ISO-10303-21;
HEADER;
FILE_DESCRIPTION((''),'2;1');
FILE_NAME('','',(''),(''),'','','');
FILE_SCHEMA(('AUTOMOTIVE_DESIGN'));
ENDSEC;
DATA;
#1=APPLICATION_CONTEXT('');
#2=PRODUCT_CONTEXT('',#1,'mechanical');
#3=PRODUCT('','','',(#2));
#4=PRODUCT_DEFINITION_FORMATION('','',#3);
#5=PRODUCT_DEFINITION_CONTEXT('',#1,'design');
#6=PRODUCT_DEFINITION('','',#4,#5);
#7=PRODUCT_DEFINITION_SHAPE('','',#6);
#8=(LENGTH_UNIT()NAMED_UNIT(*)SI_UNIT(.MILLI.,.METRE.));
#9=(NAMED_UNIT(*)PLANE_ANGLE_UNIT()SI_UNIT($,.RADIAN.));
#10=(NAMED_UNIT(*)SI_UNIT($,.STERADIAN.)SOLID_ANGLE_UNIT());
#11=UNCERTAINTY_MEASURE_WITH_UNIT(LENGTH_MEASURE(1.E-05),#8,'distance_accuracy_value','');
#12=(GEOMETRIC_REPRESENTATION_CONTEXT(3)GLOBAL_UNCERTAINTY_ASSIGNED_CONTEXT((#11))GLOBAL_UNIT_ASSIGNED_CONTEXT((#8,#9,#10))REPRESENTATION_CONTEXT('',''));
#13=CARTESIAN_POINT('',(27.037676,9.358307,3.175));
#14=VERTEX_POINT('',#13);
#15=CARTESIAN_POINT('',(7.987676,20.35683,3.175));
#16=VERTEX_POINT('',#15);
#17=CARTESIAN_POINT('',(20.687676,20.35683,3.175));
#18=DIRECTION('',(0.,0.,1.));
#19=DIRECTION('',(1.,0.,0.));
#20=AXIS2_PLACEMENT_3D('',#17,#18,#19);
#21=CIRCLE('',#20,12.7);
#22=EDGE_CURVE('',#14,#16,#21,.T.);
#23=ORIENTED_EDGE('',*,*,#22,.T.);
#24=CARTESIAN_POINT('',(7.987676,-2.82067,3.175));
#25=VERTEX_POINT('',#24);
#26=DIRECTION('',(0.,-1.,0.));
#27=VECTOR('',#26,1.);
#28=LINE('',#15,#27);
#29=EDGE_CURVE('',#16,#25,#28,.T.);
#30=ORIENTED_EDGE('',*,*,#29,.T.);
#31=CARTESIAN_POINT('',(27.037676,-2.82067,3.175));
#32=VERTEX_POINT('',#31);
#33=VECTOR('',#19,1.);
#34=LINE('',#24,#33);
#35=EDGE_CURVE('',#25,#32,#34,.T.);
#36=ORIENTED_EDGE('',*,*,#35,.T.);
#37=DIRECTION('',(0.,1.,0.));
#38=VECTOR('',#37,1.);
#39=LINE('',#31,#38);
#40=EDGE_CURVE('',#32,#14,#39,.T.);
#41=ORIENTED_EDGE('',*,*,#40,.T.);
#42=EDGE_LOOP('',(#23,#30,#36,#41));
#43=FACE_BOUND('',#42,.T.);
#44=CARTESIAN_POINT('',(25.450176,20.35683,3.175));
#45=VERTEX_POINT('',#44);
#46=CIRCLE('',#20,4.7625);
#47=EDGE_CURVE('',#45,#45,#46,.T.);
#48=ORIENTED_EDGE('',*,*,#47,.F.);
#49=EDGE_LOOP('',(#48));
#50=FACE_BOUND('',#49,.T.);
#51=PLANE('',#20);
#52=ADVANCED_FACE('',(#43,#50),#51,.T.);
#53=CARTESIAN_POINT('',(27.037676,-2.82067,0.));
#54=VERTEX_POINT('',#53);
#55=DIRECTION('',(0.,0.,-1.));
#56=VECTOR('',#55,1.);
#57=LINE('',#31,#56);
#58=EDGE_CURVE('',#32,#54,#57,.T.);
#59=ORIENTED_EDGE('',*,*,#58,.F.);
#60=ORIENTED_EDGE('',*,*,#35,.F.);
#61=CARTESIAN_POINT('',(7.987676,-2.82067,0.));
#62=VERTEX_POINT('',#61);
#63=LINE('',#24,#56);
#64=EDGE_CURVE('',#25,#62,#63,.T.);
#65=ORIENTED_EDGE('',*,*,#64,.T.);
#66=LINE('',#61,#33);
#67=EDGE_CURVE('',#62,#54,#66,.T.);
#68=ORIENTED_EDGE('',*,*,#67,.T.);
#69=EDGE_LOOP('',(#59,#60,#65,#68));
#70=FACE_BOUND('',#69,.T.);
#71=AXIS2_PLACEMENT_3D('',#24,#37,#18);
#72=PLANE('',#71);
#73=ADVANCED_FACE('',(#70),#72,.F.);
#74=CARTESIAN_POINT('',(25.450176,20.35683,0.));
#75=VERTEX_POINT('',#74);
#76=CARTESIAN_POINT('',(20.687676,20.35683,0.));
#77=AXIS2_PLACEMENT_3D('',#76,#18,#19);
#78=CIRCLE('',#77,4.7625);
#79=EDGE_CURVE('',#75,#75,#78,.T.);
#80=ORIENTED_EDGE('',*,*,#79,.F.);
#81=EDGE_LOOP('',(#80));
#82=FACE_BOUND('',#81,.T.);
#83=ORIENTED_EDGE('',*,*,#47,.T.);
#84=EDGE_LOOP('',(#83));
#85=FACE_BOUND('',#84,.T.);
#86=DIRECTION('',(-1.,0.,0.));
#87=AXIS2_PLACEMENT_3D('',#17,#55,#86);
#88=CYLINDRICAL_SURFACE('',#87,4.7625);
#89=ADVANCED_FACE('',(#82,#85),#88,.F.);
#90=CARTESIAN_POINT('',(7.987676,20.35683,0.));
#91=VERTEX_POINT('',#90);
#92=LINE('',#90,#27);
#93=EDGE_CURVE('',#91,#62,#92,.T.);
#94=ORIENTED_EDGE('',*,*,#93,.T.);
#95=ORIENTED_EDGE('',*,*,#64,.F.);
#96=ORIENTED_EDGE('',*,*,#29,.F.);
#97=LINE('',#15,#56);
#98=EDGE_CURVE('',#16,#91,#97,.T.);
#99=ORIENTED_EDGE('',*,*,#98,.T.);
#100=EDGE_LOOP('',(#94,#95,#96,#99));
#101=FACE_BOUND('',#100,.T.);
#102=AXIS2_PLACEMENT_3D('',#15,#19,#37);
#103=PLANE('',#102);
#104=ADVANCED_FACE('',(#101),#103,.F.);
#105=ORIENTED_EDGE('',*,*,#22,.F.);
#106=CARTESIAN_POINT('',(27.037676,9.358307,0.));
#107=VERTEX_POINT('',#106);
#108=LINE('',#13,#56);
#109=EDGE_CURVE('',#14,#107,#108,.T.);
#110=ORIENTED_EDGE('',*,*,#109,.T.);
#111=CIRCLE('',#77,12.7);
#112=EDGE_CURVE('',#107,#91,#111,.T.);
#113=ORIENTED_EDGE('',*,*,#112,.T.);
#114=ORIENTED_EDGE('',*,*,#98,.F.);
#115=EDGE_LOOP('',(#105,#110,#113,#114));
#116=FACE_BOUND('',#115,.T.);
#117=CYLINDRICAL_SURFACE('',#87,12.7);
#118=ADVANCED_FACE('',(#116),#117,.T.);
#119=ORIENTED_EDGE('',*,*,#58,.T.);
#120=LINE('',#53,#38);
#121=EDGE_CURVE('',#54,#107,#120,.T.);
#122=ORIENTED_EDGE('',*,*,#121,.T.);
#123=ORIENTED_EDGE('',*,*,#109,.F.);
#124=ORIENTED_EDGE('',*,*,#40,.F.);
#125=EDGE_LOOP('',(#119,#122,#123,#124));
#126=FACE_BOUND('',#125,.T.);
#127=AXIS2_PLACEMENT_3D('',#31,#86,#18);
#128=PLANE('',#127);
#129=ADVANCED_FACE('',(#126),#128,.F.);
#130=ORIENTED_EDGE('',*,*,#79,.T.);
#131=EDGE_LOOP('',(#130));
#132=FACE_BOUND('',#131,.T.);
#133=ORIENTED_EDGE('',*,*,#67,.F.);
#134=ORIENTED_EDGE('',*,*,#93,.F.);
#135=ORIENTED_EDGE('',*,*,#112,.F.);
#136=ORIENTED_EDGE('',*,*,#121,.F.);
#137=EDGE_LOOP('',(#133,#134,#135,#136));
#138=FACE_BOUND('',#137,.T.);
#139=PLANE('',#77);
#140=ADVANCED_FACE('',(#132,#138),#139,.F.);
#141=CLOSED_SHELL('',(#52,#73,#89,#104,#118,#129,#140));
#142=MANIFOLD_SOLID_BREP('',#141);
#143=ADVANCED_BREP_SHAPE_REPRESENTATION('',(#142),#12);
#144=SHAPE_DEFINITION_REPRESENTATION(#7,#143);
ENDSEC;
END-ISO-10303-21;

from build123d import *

# Parameters (mm, degrees)
SKETCH1_R           = 4.7625
BOSS_EXTRUDE1_DEPTH = 3.175


with BuildPart() as part:
    # Sketch1 → Boss-Extrude1 (new body)
    with BuildSketch(Plane.XY):
        with BuildLine():
            Line((7.987675642, 20.35683), (7.987675642, -2.82067))
            Line((7.987675642, -2.82067), (27.037675642, -2.82067))
            Line((27.037675642, -2.82067), (27.037675642, 9.358307372))
            ThreePointArc((27.037675642, 9.358307372), (27.037675642, 31.355352628), (7.987675642, 20.35683))
        make_face()
        with Locations((20.687675642, 20.35683)):
            Circle(SKETCH1_R, mode=Mode.SUBTRACT)
    extrude(amount=BOSS_EXTRUDE1_DEPTH)


solid = part.part
